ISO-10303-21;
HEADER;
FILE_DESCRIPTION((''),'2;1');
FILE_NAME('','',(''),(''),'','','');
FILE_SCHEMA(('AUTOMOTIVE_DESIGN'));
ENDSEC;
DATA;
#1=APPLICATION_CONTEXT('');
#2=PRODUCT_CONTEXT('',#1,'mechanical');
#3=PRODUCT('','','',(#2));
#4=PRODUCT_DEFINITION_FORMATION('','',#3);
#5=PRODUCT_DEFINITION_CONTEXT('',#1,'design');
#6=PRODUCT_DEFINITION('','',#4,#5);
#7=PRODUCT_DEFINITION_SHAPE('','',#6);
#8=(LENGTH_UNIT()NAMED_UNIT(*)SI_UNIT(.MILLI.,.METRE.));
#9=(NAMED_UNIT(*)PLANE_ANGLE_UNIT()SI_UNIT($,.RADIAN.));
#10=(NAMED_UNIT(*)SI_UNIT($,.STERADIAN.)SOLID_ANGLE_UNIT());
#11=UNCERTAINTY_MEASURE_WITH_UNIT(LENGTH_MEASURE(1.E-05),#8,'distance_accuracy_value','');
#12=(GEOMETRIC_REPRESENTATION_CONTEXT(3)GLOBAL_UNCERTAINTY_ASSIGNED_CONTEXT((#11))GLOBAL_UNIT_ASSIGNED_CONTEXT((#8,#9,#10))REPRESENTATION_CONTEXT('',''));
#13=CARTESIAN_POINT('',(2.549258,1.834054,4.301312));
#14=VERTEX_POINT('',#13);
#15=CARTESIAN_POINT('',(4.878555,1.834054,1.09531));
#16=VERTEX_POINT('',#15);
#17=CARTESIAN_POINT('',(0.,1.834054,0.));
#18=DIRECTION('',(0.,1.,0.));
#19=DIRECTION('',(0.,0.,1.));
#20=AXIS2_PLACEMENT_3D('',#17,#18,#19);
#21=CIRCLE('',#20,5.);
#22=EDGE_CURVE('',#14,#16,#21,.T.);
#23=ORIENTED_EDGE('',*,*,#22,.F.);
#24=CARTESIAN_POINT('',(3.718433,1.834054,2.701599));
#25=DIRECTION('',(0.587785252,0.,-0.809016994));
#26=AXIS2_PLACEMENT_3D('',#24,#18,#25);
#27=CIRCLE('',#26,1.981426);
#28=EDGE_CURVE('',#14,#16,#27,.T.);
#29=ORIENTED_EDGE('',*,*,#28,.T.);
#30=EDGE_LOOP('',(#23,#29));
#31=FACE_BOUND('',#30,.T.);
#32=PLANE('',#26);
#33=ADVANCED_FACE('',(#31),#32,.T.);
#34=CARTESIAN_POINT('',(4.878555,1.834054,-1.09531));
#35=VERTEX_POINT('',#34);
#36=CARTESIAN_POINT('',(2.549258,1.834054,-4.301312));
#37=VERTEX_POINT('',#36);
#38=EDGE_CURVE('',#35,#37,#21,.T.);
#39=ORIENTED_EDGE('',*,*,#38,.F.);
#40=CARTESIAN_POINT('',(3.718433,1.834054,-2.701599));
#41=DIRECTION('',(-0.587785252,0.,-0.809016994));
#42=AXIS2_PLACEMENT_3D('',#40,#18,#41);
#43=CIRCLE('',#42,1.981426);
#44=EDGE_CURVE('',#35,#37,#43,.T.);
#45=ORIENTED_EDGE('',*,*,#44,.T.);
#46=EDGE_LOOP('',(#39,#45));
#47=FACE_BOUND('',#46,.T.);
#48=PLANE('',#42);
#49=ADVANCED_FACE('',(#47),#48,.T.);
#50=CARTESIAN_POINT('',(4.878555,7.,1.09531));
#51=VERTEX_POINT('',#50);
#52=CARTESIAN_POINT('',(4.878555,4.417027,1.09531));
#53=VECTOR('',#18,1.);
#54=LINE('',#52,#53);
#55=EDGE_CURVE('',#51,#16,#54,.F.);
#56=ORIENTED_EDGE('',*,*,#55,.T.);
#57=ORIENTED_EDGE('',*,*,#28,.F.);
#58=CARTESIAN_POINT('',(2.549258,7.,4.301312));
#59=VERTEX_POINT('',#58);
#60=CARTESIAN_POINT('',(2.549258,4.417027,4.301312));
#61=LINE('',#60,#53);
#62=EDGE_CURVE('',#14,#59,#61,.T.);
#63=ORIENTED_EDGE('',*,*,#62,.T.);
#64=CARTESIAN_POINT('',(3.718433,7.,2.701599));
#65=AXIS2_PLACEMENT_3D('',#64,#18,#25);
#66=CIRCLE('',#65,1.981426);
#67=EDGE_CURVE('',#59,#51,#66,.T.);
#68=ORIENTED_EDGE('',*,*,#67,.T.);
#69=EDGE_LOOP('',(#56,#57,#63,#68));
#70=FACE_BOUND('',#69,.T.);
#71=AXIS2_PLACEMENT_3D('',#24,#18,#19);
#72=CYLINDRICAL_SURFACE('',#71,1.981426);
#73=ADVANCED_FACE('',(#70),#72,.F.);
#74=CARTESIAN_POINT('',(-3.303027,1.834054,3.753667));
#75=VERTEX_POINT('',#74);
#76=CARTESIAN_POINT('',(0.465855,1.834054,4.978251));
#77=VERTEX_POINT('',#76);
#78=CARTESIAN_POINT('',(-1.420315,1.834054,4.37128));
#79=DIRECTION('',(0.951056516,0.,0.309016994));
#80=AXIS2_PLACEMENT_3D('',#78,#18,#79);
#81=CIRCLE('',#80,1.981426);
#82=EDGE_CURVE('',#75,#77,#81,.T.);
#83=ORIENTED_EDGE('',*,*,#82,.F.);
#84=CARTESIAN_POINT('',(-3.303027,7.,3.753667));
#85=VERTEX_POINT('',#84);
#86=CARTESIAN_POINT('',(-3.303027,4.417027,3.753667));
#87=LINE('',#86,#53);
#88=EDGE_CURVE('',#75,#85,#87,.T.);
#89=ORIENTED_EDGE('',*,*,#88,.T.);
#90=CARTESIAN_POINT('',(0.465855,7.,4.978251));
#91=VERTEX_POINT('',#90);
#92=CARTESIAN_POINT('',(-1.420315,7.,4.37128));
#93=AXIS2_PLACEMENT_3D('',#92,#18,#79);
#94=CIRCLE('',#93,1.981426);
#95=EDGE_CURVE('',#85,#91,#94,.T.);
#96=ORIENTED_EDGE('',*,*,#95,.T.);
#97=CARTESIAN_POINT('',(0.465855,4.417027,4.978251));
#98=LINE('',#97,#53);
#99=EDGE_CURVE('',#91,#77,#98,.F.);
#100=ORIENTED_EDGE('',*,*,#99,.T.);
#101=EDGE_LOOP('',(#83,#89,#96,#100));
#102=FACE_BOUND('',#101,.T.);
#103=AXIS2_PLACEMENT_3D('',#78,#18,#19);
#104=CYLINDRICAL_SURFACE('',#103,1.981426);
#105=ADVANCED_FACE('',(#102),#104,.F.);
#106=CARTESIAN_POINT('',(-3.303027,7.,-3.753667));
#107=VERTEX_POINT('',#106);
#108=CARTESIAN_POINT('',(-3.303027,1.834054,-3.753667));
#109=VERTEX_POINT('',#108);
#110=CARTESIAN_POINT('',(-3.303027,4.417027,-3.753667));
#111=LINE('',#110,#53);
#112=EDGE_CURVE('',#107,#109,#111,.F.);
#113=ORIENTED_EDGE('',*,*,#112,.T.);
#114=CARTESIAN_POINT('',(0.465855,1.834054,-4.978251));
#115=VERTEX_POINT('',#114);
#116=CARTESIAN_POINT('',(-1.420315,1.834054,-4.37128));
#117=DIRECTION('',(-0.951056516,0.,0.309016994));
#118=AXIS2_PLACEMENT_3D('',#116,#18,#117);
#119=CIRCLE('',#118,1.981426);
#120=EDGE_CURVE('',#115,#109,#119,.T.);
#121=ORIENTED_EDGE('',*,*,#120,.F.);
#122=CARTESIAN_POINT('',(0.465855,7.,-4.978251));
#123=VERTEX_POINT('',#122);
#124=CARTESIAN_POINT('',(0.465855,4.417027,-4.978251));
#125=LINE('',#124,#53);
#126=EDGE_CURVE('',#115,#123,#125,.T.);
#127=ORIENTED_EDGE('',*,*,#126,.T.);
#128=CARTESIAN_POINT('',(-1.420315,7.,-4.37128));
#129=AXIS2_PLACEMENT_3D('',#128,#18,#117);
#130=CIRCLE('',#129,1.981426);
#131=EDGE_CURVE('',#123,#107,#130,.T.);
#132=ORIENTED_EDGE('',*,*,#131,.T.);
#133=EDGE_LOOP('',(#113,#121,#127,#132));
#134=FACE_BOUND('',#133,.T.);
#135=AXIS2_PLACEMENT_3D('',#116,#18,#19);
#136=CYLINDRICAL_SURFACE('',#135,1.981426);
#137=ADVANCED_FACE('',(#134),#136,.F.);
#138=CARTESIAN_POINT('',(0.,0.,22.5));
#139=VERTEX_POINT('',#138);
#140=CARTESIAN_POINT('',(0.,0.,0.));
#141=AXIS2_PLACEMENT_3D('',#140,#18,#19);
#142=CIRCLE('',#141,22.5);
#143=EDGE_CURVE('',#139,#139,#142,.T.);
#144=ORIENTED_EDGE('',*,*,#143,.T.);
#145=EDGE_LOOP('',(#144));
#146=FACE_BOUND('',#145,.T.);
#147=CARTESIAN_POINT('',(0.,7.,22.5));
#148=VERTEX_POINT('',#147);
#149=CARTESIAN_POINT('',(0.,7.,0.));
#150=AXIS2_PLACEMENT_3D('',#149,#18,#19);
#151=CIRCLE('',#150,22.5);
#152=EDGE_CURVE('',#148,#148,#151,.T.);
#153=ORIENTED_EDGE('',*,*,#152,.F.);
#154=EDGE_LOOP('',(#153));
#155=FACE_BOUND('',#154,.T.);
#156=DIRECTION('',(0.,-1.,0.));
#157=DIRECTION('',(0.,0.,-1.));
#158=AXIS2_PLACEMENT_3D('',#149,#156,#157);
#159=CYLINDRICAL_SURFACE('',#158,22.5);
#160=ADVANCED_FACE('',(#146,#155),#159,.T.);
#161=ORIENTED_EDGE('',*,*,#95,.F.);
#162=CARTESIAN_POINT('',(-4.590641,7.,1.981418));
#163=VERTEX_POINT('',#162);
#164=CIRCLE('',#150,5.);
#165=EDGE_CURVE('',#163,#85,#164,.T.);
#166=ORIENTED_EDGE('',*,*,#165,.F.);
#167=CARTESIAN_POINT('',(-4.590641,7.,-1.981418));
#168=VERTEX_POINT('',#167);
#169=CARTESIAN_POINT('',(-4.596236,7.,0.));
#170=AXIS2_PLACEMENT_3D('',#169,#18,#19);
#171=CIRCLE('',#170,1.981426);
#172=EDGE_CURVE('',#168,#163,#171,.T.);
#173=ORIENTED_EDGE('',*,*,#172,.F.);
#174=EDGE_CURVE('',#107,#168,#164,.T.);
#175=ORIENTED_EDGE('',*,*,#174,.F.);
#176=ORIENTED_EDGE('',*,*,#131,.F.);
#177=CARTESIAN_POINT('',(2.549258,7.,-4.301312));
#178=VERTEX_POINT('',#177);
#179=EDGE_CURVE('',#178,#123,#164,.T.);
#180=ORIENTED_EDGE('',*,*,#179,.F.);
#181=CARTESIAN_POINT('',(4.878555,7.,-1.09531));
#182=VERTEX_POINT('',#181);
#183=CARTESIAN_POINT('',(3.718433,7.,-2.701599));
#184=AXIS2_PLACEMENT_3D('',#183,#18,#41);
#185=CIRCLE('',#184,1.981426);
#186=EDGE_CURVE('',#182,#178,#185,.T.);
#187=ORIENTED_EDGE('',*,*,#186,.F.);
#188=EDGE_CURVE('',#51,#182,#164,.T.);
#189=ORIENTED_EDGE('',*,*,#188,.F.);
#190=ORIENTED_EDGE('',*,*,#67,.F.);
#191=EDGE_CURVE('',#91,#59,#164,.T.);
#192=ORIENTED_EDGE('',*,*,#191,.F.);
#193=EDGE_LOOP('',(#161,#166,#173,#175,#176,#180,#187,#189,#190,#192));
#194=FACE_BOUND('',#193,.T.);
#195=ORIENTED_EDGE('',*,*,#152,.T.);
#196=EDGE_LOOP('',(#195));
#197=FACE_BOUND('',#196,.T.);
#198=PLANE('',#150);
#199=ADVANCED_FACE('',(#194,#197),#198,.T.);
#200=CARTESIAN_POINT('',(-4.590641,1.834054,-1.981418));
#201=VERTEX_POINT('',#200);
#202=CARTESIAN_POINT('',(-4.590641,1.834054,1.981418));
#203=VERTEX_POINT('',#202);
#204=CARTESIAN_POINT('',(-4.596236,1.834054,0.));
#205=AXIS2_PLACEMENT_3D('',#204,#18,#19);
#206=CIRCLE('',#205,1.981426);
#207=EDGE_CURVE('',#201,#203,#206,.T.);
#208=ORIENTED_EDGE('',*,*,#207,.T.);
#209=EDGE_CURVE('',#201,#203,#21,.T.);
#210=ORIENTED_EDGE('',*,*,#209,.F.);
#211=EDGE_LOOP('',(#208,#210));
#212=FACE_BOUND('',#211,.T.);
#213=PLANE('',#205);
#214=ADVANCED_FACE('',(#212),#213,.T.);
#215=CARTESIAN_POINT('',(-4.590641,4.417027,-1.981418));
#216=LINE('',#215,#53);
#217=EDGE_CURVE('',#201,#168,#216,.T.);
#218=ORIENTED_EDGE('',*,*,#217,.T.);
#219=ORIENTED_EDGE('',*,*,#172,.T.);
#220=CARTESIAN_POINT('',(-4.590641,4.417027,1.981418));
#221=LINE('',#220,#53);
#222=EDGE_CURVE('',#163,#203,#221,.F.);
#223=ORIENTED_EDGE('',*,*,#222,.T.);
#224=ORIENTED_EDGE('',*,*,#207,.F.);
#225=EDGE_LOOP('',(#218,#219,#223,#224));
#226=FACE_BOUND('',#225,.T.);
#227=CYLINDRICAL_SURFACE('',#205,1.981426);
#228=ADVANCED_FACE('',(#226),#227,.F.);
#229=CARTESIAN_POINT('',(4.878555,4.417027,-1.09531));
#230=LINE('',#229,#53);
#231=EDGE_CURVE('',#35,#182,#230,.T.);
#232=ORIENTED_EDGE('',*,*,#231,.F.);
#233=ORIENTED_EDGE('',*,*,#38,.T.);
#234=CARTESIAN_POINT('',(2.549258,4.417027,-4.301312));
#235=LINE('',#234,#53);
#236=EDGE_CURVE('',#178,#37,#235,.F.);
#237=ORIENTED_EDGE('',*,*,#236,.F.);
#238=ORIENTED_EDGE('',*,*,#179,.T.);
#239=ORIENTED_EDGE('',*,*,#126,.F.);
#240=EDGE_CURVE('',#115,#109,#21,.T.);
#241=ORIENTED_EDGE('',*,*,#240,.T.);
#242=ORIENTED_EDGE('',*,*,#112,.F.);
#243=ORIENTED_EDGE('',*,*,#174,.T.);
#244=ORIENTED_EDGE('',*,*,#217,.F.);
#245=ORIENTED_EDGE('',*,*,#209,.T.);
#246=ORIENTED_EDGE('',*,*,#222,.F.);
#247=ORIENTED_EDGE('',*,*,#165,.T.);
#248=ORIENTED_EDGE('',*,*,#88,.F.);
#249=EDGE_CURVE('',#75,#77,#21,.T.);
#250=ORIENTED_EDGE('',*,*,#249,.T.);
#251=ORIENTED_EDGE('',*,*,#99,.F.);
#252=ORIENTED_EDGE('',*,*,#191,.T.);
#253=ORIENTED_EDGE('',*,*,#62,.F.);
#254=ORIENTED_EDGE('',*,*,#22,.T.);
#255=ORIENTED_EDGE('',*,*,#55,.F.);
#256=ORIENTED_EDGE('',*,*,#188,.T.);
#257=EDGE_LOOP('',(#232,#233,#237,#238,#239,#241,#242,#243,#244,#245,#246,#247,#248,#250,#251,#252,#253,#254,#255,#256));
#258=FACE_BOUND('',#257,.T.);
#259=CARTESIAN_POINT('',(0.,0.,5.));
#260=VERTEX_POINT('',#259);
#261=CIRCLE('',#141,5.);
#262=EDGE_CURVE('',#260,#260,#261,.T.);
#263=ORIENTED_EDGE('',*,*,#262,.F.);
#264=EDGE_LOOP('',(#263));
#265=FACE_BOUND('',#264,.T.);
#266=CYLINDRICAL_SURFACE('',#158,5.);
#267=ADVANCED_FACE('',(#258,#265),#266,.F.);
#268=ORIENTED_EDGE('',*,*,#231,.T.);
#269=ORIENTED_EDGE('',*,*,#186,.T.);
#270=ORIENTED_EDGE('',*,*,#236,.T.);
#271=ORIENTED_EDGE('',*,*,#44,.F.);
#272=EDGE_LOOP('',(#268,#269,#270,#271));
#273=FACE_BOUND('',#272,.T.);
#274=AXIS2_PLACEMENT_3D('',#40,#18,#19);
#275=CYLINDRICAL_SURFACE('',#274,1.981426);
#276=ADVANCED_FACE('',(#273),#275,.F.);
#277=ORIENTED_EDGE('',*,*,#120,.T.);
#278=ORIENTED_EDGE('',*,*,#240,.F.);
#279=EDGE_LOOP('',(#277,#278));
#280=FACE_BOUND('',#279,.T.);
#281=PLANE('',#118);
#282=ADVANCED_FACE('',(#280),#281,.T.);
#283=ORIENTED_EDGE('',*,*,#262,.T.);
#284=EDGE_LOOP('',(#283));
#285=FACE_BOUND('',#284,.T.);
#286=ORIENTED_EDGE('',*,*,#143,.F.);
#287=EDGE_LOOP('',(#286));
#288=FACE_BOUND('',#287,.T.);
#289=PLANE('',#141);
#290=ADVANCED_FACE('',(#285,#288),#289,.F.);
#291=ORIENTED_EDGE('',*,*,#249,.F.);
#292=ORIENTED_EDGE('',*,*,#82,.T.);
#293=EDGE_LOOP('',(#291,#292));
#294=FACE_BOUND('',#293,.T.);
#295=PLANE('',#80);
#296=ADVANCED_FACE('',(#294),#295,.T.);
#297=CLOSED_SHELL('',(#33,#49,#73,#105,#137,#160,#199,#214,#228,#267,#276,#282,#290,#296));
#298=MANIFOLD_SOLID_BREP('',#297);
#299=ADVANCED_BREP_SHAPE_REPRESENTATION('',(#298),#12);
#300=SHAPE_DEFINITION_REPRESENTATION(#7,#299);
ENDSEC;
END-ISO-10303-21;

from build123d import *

# Parameters (mm, degrees)
SKETCH1_R           = 22.5
BOSS_EXTRUDE1_DEPTH = 7
SKETCH2_R           = 5
CUT_EXTRUDE1_DEPTH  = 33.580669115
SKETCH3_R           = 1.981426301
CUT_EXTRUDE2_DEPTH  = 5.165945731
CIRPATTERN1_COUNT   = 5


with BuildPart() as part:
    # Sketch1 → Boss-Extrude1 (new body)
    with BuildSketch(Plane(origin=(0, 0, 0), x_dir=(1, 0, 0), z_dir=(0, 1, 0))):
        Circle(SKETCH1_R)
    extrude(amount=BOSS_EXTRUDE1_DEPTH)

    # Sketch2 → Cut-Extrude1 (cut, through all)
    with BuildSketch(Plane(origin=(0, 0, 0), x_dir=(1, 0, 0), z_dir=(0, 1, 0))):
        Circle(SKETCH2_R)
    extrude(amount=CUT_EXTRUDE1_DEPTH, mode=Mode.SUBTRACT)

    # Sketch3 → Cut-Extrude2 (cut)
    with BuildSketch(Plane(origin=(0, 7, 0), x_dir=(1, 0, 0), z_dir=(0, 1, 0))):
        with Locations((-4.596235577, 0)):
            Circle(SKETCH3_R)
    cut_extrude2 = extrude(amount=-CUT_EXTRUDE2_DEPTH, mode=Mode.SUBTRACT)

    # CirPattern1: Cut-Extrude2 ×5 about axis
    cirpattern1_axis = Axis((0, 0, 0), (0, 1, 0))
    for i in range(1, CIRPATTERN1_COUNT):
        add(cut_extrude2.rotate(cirpattern1_axis, i * 360 / CIRPATTERN1_COUNT), mode=Mode.SUBTRACT)


solid = part.part
